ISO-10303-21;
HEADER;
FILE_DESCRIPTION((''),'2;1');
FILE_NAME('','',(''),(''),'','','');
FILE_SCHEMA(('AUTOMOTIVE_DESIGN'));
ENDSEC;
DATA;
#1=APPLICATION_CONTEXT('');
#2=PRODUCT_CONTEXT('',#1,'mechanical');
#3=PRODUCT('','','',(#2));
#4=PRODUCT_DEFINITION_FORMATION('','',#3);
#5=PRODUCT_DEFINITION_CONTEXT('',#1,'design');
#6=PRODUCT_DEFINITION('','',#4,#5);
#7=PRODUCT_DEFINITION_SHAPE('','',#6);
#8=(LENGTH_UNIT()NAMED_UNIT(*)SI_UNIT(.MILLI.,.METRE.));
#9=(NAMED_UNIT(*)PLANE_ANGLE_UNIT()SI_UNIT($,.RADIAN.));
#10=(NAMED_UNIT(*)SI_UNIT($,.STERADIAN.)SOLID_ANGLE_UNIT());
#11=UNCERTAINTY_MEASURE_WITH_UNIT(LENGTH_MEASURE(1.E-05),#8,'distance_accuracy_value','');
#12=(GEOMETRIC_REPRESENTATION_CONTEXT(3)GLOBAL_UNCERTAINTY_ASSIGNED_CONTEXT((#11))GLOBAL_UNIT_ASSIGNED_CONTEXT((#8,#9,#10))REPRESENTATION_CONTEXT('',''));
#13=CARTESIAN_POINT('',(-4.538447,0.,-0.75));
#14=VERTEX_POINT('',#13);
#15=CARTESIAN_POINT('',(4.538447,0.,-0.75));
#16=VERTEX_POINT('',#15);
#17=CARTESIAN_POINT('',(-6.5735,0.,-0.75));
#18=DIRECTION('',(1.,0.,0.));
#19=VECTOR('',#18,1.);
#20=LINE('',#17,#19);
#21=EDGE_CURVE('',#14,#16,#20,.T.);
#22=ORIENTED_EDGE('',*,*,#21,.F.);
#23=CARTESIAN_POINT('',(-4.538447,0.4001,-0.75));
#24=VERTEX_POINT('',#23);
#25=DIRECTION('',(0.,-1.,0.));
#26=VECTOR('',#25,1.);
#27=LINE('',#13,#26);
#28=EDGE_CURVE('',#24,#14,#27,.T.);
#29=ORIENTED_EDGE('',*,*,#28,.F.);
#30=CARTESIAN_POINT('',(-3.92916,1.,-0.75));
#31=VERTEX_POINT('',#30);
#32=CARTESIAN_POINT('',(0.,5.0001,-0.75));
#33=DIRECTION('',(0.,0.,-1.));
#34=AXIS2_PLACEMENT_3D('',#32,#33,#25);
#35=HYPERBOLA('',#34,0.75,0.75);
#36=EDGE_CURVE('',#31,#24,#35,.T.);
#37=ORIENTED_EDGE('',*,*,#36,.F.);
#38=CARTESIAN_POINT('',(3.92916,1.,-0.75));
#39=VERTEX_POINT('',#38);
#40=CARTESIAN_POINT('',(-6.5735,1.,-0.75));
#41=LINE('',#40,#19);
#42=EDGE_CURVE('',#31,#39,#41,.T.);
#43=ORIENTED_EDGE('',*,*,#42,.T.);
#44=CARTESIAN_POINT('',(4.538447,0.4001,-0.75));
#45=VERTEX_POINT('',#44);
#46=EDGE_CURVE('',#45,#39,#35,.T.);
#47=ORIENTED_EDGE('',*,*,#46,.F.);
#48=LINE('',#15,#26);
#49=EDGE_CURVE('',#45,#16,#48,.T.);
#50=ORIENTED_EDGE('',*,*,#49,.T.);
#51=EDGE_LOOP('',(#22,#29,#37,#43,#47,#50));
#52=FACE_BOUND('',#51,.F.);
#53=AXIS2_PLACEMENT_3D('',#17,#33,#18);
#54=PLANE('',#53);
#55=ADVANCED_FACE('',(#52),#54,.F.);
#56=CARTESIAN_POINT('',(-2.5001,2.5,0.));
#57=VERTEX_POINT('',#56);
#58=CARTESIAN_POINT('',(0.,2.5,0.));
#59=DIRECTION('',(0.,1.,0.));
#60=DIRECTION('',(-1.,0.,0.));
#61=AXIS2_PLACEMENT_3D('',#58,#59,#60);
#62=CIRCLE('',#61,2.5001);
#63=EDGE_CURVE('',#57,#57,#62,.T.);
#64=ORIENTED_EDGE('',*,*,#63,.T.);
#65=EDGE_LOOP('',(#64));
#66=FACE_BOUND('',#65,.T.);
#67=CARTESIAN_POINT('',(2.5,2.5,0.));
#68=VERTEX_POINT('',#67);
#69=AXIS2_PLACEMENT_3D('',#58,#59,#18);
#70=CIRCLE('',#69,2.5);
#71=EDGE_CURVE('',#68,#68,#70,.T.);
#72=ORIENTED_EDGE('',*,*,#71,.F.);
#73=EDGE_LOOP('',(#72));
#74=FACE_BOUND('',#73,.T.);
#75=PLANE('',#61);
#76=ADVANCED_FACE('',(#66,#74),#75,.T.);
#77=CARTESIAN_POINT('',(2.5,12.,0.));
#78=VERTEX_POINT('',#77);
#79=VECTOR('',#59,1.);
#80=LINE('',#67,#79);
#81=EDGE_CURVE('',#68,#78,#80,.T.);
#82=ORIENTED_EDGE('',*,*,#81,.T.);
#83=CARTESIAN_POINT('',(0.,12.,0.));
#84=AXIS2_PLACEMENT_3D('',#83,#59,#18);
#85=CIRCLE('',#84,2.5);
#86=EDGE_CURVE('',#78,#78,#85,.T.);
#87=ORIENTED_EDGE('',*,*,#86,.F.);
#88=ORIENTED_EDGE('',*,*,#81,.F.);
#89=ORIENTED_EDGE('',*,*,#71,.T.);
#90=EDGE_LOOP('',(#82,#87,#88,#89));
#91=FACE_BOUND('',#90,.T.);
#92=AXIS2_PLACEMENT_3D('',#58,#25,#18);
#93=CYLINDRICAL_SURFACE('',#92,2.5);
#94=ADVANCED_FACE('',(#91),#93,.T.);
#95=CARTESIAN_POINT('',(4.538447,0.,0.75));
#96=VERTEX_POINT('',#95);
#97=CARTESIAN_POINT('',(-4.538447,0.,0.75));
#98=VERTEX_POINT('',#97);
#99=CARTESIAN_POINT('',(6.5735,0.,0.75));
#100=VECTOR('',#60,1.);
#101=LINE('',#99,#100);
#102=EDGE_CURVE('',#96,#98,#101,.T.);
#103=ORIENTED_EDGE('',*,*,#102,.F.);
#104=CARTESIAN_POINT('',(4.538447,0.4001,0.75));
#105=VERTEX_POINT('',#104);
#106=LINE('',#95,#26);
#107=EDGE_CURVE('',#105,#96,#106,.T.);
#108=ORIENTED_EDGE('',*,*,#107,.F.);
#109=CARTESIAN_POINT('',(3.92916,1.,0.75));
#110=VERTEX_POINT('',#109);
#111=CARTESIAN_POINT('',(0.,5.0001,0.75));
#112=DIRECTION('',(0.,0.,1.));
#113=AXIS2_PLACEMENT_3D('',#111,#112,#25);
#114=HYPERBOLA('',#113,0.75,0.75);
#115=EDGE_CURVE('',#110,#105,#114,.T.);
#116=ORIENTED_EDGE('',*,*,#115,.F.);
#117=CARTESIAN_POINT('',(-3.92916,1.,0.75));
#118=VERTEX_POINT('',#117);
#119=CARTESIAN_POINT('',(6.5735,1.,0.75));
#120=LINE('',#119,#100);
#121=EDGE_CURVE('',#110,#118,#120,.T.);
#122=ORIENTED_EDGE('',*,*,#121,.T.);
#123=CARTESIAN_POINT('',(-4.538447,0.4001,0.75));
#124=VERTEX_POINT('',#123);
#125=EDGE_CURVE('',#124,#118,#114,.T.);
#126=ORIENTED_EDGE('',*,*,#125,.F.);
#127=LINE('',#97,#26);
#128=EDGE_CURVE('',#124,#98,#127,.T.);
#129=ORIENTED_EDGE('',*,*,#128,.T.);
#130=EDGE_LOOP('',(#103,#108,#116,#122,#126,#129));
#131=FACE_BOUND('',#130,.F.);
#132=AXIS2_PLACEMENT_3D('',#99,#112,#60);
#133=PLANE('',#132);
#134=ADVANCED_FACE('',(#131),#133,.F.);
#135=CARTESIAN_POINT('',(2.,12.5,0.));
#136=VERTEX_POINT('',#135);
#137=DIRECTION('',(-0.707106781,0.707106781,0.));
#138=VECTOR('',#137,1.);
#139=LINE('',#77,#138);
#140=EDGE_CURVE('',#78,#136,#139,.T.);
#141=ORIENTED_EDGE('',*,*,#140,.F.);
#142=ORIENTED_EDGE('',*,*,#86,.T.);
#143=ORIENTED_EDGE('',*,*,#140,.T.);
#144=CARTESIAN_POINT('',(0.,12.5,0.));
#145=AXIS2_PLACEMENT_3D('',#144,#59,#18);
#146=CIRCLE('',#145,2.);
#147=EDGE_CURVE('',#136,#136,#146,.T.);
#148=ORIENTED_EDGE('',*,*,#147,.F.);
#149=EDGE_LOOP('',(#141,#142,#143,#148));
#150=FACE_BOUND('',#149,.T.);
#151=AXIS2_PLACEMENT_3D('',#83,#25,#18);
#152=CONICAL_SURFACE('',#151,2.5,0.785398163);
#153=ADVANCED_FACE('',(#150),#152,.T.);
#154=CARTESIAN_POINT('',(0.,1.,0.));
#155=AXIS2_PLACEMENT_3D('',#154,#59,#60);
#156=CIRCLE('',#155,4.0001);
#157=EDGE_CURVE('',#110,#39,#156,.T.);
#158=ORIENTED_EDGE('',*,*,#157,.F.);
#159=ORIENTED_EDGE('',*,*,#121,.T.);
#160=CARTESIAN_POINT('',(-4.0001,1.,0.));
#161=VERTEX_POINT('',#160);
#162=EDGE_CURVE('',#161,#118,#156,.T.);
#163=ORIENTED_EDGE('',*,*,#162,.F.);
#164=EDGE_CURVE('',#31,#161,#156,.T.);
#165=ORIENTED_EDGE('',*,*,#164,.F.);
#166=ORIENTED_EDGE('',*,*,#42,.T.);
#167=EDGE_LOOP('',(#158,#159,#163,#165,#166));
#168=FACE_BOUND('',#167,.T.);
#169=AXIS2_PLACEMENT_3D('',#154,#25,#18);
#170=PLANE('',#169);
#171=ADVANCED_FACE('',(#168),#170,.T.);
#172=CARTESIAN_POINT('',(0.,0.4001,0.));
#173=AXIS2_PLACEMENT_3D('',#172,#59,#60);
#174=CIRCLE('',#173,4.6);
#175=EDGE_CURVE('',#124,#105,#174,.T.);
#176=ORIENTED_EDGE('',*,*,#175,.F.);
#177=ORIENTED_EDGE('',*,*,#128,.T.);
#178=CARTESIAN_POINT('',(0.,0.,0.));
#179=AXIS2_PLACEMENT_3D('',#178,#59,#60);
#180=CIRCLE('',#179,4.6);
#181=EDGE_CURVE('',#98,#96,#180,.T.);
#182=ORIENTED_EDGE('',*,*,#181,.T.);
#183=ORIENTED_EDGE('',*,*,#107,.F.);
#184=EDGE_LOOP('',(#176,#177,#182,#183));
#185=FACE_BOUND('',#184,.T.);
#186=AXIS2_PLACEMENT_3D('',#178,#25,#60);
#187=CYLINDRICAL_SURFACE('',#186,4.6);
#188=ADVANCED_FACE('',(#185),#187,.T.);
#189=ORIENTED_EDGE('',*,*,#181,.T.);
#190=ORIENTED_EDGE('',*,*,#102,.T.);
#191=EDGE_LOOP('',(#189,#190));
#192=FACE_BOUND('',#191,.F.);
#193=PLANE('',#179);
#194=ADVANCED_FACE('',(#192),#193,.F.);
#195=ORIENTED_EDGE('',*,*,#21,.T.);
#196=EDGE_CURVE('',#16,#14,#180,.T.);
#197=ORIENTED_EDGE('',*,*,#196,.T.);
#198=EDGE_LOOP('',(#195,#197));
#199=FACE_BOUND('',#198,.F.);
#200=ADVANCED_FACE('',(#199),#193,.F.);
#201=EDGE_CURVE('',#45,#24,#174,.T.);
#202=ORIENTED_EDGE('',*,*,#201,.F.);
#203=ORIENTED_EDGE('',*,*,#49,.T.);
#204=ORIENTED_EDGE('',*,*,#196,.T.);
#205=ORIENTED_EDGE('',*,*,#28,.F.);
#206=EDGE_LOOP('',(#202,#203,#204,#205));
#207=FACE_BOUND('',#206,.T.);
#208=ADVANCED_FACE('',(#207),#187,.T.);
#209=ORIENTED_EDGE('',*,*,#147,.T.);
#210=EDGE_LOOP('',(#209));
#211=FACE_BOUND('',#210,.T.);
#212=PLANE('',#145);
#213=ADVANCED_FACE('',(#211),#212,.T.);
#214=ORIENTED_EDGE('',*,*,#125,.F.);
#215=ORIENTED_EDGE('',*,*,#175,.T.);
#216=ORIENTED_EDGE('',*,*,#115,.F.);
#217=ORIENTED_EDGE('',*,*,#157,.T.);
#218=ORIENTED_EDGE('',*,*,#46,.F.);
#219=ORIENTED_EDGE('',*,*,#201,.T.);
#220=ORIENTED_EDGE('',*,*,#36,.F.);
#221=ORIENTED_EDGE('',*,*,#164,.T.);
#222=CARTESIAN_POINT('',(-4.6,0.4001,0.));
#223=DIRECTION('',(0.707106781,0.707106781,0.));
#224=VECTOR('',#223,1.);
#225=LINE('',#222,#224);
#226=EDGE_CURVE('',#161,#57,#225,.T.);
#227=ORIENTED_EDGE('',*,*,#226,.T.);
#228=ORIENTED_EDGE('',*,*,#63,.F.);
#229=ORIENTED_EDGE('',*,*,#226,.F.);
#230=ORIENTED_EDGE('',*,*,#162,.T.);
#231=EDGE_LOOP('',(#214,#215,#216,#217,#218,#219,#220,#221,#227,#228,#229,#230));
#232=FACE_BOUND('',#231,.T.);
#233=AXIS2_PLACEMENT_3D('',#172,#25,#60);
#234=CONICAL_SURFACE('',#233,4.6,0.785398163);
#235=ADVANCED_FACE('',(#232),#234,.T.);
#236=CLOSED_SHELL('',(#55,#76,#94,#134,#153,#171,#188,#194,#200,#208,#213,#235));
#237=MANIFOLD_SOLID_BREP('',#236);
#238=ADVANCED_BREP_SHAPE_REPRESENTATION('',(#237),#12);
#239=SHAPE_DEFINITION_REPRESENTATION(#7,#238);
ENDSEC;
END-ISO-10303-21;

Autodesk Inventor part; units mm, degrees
ref_plane "YZ Plane" through (0, 0, 0) normal (1, 0, 0) x (0, 1, 0)
ref_plane "XZ Plane" through (0, 0, 0) normal (0, 1, 0) x (-1, 0, 0)
ref_plane "XY Plane" through (0, 0, 0) normal (0, 0, 1) x (1, 0, 0)
sketch "Эскиз1" plane through (0, 0, 0) normal (0, 1, 0) x (-1, 0, 0)
  circle A0 centre (0, 0) radius 4.6
  dimension "d0" = 9.2
extrude "Выдавливание1" add sketch "Эскиз1" along normal blind 2.5
sketch "Эскиз2" plane through (0, 2.5, 0) normal (0, 1, 0) x (1, 0, 0)
  circle A0 centre (0, 0) radius 2.5
  dimension "d3" = 5
extrude "Выдавливание2" add sketch "Эскиз2" along normal blind 10
chamfer "Фаска1" distance 2.1 angle 45 1 edges at (4.6, 2.5, 0)
thread "Резьба1" size "M5x0.8" class "6g" standard "ANSI Metric M Profile" full length
chamfer "Фаска2" distance 0.5 angle 45 1 edges at (-2.5, 12.5, 0)
sketch "Эскиз3" plane through (0, 0, 0) normal (0, -1, 0) x (1, 0, 0)
  line L0 (-6.5735, -0.75) -> (6.5735, -0.75)
  line L1 (6.5735, -0.75) -> (6.5735, 0.75)
  line L2 (6.5735, 0.75) -> (-6.5735, 0.75)
  line L3 (-6.5735, 0.75) -> (-6.5735, -0.75)
  line L4 (-6.5735, -0.75) -> (6.5735, 0.75) construction
  line L5 (6.5735, -0.75) -> (-6.5735, 0.75) construction
  point P0 (0, 0)
  dimension "d14" = 1.5
extrude "Выдавливание3" cut sketch "Эскиз3" against normal blind 1
properties part number "Винт М5х10 с потайной головкой" material "Сталь"
